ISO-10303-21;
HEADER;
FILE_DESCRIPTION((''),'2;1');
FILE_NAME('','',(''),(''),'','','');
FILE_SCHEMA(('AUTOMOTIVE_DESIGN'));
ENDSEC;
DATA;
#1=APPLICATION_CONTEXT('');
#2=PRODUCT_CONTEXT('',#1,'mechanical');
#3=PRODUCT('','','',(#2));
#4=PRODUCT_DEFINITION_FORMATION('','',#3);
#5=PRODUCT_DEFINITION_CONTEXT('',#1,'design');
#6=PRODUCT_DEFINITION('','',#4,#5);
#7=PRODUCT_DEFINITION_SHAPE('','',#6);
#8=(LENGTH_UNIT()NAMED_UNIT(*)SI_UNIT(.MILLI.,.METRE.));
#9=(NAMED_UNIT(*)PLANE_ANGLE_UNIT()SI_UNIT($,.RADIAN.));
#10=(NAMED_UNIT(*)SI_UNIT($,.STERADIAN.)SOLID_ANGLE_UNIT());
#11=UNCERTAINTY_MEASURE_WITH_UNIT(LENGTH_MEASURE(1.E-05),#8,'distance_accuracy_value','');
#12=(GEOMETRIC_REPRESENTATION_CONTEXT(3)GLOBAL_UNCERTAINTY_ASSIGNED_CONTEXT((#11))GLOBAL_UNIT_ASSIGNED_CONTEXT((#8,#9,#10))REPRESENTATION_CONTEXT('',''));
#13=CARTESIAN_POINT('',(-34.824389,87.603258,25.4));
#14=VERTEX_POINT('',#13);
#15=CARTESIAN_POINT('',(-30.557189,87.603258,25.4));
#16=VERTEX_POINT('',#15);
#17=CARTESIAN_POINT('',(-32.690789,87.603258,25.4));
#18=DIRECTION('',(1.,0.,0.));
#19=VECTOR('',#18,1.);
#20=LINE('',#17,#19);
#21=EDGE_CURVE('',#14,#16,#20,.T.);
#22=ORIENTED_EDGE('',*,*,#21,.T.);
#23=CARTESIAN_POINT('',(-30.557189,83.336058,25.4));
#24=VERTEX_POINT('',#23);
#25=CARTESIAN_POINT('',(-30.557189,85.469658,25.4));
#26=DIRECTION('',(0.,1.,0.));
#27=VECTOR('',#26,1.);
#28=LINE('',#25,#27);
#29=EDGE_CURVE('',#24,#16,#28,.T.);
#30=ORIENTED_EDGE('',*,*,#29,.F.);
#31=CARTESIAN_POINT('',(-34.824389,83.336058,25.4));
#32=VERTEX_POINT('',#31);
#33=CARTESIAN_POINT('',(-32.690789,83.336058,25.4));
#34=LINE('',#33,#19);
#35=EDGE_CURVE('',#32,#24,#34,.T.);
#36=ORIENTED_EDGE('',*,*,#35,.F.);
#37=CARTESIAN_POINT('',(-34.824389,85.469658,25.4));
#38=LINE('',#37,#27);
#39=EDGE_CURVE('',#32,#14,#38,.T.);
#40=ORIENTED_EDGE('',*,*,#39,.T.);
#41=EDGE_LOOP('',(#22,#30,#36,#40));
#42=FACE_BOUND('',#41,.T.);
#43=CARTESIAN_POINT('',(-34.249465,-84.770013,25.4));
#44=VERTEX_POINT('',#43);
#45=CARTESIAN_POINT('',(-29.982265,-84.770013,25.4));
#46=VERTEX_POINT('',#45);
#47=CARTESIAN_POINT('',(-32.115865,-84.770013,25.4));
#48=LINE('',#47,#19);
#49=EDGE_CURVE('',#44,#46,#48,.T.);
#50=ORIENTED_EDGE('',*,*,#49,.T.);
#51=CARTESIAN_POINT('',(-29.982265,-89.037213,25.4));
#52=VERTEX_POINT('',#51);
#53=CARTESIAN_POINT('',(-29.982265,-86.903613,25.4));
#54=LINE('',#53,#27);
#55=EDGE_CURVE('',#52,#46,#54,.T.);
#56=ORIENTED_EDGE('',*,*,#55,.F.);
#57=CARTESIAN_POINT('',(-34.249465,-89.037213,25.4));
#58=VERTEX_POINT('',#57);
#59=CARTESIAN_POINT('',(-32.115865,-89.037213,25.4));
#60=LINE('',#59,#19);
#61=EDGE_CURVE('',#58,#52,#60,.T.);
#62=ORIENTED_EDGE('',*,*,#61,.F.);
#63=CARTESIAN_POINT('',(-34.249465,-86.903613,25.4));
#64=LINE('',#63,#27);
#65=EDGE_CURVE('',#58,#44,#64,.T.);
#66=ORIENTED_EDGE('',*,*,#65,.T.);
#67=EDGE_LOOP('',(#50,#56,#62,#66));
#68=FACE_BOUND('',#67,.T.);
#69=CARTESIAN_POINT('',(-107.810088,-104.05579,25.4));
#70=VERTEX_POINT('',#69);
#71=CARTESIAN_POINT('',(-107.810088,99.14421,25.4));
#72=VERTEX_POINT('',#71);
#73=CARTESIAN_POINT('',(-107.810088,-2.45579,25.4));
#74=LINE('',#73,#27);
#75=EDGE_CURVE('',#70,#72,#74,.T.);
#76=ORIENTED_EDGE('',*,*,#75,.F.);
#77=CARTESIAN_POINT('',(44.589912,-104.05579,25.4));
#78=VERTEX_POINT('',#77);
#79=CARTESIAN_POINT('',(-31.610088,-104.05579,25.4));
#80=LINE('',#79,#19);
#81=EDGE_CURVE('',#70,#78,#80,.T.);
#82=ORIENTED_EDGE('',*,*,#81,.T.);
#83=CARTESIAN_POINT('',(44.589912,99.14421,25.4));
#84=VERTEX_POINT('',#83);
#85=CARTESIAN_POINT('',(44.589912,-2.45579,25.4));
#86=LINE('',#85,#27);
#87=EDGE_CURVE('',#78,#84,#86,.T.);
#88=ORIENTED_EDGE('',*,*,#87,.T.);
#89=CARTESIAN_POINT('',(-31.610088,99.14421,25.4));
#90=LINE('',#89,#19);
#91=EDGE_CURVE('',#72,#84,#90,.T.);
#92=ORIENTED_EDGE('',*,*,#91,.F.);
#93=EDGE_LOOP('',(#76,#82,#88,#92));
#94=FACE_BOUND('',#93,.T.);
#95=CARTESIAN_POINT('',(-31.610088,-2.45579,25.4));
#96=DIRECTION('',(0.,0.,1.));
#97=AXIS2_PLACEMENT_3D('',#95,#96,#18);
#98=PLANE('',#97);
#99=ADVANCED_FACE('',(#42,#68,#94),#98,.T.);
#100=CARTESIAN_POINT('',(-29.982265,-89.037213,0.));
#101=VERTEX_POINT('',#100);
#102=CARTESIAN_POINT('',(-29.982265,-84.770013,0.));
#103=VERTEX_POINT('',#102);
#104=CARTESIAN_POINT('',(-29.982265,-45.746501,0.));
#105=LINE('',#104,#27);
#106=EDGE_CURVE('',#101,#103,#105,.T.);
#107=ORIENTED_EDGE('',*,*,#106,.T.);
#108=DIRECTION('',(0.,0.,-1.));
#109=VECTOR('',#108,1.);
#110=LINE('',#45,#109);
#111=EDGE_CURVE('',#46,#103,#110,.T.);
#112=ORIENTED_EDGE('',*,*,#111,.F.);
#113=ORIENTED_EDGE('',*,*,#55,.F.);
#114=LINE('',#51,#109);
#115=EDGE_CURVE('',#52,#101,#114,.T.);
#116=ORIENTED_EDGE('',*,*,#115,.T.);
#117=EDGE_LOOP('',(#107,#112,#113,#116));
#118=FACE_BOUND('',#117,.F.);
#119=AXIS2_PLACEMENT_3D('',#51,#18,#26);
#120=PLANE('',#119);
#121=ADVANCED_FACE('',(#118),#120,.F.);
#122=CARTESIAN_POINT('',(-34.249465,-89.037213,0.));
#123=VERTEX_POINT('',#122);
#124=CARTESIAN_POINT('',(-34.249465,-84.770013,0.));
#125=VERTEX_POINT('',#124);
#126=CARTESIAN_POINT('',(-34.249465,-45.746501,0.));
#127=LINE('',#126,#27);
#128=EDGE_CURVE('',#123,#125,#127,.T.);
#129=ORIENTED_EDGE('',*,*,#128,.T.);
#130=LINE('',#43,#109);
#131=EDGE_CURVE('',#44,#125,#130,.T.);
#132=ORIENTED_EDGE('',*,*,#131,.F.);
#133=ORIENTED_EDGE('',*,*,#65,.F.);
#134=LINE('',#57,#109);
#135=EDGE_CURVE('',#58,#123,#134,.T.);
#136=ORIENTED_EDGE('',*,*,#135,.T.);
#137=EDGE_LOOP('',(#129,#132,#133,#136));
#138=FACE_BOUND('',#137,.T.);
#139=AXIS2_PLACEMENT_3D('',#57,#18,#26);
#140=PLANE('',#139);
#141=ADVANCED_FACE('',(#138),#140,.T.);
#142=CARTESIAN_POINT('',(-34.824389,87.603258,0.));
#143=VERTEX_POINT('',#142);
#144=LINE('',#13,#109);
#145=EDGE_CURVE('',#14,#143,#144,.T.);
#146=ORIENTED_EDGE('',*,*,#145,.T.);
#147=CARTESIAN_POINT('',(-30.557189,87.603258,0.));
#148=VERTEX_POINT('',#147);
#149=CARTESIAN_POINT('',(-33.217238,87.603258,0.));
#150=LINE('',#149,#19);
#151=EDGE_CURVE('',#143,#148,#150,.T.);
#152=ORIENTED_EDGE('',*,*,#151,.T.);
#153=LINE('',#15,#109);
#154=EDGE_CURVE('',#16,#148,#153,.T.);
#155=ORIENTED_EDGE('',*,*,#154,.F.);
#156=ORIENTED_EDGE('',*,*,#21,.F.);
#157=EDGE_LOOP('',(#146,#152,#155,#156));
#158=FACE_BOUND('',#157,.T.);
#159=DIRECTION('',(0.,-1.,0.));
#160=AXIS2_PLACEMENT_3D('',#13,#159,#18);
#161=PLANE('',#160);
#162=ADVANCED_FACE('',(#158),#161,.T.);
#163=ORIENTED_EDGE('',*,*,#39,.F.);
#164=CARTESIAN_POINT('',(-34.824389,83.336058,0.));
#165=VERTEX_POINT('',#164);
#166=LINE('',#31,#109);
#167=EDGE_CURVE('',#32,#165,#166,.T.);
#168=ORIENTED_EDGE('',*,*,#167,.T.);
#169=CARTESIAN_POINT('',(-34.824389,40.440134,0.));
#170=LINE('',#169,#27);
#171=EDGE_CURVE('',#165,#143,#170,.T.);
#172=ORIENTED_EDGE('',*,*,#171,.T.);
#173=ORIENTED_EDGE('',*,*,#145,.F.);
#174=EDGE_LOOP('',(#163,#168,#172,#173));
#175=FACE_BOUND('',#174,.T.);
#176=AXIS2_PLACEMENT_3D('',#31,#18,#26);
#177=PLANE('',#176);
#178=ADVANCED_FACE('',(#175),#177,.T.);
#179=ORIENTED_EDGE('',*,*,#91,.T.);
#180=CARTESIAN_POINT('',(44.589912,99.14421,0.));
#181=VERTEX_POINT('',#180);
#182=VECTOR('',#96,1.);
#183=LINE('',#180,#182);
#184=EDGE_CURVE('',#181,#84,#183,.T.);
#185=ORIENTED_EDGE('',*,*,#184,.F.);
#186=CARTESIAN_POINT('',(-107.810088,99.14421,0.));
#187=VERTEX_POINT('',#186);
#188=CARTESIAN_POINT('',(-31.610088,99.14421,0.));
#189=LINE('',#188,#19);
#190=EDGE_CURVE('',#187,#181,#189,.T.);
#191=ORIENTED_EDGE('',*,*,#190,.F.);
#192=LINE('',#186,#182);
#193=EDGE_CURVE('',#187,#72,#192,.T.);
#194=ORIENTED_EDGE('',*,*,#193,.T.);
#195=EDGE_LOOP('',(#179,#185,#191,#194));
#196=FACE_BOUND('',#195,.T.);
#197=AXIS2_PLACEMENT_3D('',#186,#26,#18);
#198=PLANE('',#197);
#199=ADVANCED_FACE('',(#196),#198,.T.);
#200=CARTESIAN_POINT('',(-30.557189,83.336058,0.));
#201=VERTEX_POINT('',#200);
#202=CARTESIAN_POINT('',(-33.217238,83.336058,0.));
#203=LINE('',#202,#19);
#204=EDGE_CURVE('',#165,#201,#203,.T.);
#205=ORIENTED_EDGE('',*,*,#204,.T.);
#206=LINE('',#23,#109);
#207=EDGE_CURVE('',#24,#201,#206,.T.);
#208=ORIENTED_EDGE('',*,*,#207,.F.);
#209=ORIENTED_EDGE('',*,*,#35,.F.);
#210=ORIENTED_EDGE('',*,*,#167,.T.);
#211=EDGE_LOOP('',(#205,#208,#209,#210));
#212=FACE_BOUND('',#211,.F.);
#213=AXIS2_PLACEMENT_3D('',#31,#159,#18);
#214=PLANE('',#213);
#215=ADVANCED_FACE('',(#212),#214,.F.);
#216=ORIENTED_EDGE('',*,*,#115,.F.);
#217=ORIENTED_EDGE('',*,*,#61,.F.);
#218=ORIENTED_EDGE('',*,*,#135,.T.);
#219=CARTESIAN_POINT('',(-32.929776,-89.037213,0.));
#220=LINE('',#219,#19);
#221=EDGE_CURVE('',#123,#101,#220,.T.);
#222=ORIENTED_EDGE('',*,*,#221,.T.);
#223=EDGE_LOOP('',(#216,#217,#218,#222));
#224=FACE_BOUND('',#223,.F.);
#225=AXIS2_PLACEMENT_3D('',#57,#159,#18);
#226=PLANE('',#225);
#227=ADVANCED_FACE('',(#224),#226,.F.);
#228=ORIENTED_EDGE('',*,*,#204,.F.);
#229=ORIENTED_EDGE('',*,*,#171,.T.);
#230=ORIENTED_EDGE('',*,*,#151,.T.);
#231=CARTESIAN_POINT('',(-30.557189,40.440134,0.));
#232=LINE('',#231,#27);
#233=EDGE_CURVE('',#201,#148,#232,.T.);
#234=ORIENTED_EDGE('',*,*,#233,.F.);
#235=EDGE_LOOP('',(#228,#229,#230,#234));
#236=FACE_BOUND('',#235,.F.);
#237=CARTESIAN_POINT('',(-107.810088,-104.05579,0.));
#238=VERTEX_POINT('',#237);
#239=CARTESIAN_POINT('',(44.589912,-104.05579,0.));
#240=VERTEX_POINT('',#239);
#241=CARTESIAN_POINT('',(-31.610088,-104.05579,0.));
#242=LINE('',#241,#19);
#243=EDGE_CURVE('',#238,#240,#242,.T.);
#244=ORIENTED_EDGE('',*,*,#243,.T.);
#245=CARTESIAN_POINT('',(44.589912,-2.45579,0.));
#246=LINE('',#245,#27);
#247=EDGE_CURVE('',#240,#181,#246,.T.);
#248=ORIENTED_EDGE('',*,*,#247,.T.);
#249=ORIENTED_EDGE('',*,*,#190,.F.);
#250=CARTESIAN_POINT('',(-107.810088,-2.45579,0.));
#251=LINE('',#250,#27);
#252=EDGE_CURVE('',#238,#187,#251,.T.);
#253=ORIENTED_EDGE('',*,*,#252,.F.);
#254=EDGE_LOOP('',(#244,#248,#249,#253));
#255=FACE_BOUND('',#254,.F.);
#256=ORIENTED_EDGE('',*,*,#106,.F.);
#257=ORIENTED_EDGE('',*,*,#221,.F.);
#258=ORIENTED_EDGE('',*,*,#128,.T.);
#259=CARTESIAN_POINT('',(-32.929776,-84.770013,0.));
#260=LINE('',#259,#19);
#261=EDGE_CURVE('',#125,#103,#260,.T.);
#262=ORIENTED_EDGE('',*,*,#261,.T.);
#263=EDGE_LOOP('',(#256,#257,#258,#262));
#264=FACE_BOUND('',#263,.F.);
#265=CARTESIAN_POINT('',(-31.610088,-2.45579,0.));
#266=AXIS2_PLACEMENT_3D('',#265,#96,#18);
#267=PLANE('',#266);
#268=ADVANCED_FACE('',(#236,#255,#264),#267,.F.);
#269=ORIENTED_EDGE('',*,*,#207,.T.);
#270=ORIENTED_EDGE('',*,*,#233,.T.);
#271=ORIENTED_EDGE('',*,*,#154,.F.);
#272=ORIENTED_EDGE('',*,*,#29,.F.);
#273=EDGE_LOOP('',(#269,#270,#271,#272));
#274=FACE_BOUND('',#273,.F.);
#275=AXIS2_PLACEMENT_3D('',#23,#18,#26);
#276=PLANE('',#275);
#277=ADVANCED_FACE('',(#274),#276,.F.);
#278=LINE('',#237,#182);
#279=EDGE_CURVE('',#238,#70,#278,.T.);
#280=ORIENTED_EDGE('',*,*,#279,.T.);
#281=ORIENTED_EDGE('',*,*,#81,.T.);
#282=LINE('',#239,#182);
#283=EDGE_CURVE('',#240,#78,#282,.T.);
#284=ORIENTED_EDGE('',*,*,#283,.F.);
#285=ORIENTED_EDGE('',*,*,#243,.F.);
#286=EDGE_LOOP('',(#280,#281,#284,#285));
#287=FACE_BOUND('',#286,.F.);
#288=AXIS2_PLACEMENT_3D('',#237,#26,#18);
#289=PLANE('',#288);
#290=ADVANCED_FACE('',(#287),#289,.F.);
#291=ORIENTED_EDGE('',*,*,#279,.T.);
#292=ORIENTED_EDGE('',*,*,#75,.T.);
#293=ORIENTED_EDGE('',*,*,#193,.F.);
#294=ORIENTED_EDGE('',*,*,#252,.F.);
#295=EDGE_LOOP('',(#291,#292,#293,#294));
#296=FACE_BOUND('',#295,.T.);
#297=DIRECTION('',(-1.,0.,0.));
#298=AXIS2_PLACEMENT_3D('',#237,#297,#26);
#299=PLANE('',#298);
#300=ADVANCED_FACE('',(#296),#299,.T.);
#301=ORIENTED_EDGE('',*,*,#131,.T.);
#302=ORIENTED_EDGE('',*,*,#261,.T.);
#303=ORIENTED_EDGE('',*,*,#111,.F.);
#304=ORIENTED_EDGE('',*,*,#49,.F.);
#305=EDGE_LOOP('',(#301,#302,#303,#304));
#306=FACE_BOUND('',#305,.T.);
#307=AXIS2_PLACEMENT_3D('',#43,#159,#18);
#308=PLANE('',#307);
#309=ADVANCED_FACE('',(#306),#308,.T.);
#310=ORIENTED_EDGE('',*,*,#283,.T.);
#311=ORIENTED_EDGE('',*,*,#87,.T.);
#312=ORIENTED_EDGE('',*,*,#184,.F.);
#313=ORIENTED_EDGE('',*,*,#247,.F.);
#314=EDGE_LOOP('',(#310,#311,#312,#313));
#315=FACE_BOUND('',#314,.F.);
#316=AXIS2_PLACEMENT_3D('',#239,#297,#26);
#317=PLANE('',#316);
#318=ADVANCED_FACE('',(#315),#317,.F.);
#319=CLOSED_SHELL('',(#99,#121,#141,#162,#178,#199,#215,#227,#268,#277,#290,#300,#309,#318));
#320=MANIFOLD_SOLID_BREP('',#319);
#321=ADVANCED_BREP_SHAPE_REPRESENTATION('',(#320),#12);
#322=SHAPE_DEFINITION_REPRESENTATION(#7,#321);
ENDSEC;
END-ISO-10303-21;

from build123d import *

# Parameters (mm, degrees)
F0_W     = 152.4
F0_H     = 203.2
F2_DEPTH = 25.4
F3_W     = 4.2672
F3_H     = 4.2672
F4_DEPTH = 25.401
F5_W     = 4.2672
F5_H     = 4.2672
F6_DEPTH = 25.401


# Not quite as in the source:
# - a feature names something its author has since deleted; it is built from what else it names


with BuildPart() as f2:
    # F0 (on Top) → F2 (new body)
    with BuildSketch(Plane.XY):
        with Locations((-31.6100876886, -2.4557895958)):
            Rectangle(F0_W, F0_H)
    extrude(amount=F2_DEPTH)

    # F3 (on face) → F4 (cut, through all)
    with BuildSketch(Plane.XY.offset(25.4)):
        with Locations((-32.6907886192, 85.4696582746)):
            Rectangle(F3_W, F3_H)
    extrude(amount=-F4_DEPTH, mode=Mode.SUBTRACT)

    # F5 (on face) → F6 (cut, through all)
    with BuildSketch(Plane.XY.offset(25.4)):
        with Locations((-32.1158650086, -86.9036130607)):
            Rectangle(F5_W, F5_H)
    extrude(amount=-F6_DEPTH, mode=Mode.SUBTRACT)


solid = f2.part
